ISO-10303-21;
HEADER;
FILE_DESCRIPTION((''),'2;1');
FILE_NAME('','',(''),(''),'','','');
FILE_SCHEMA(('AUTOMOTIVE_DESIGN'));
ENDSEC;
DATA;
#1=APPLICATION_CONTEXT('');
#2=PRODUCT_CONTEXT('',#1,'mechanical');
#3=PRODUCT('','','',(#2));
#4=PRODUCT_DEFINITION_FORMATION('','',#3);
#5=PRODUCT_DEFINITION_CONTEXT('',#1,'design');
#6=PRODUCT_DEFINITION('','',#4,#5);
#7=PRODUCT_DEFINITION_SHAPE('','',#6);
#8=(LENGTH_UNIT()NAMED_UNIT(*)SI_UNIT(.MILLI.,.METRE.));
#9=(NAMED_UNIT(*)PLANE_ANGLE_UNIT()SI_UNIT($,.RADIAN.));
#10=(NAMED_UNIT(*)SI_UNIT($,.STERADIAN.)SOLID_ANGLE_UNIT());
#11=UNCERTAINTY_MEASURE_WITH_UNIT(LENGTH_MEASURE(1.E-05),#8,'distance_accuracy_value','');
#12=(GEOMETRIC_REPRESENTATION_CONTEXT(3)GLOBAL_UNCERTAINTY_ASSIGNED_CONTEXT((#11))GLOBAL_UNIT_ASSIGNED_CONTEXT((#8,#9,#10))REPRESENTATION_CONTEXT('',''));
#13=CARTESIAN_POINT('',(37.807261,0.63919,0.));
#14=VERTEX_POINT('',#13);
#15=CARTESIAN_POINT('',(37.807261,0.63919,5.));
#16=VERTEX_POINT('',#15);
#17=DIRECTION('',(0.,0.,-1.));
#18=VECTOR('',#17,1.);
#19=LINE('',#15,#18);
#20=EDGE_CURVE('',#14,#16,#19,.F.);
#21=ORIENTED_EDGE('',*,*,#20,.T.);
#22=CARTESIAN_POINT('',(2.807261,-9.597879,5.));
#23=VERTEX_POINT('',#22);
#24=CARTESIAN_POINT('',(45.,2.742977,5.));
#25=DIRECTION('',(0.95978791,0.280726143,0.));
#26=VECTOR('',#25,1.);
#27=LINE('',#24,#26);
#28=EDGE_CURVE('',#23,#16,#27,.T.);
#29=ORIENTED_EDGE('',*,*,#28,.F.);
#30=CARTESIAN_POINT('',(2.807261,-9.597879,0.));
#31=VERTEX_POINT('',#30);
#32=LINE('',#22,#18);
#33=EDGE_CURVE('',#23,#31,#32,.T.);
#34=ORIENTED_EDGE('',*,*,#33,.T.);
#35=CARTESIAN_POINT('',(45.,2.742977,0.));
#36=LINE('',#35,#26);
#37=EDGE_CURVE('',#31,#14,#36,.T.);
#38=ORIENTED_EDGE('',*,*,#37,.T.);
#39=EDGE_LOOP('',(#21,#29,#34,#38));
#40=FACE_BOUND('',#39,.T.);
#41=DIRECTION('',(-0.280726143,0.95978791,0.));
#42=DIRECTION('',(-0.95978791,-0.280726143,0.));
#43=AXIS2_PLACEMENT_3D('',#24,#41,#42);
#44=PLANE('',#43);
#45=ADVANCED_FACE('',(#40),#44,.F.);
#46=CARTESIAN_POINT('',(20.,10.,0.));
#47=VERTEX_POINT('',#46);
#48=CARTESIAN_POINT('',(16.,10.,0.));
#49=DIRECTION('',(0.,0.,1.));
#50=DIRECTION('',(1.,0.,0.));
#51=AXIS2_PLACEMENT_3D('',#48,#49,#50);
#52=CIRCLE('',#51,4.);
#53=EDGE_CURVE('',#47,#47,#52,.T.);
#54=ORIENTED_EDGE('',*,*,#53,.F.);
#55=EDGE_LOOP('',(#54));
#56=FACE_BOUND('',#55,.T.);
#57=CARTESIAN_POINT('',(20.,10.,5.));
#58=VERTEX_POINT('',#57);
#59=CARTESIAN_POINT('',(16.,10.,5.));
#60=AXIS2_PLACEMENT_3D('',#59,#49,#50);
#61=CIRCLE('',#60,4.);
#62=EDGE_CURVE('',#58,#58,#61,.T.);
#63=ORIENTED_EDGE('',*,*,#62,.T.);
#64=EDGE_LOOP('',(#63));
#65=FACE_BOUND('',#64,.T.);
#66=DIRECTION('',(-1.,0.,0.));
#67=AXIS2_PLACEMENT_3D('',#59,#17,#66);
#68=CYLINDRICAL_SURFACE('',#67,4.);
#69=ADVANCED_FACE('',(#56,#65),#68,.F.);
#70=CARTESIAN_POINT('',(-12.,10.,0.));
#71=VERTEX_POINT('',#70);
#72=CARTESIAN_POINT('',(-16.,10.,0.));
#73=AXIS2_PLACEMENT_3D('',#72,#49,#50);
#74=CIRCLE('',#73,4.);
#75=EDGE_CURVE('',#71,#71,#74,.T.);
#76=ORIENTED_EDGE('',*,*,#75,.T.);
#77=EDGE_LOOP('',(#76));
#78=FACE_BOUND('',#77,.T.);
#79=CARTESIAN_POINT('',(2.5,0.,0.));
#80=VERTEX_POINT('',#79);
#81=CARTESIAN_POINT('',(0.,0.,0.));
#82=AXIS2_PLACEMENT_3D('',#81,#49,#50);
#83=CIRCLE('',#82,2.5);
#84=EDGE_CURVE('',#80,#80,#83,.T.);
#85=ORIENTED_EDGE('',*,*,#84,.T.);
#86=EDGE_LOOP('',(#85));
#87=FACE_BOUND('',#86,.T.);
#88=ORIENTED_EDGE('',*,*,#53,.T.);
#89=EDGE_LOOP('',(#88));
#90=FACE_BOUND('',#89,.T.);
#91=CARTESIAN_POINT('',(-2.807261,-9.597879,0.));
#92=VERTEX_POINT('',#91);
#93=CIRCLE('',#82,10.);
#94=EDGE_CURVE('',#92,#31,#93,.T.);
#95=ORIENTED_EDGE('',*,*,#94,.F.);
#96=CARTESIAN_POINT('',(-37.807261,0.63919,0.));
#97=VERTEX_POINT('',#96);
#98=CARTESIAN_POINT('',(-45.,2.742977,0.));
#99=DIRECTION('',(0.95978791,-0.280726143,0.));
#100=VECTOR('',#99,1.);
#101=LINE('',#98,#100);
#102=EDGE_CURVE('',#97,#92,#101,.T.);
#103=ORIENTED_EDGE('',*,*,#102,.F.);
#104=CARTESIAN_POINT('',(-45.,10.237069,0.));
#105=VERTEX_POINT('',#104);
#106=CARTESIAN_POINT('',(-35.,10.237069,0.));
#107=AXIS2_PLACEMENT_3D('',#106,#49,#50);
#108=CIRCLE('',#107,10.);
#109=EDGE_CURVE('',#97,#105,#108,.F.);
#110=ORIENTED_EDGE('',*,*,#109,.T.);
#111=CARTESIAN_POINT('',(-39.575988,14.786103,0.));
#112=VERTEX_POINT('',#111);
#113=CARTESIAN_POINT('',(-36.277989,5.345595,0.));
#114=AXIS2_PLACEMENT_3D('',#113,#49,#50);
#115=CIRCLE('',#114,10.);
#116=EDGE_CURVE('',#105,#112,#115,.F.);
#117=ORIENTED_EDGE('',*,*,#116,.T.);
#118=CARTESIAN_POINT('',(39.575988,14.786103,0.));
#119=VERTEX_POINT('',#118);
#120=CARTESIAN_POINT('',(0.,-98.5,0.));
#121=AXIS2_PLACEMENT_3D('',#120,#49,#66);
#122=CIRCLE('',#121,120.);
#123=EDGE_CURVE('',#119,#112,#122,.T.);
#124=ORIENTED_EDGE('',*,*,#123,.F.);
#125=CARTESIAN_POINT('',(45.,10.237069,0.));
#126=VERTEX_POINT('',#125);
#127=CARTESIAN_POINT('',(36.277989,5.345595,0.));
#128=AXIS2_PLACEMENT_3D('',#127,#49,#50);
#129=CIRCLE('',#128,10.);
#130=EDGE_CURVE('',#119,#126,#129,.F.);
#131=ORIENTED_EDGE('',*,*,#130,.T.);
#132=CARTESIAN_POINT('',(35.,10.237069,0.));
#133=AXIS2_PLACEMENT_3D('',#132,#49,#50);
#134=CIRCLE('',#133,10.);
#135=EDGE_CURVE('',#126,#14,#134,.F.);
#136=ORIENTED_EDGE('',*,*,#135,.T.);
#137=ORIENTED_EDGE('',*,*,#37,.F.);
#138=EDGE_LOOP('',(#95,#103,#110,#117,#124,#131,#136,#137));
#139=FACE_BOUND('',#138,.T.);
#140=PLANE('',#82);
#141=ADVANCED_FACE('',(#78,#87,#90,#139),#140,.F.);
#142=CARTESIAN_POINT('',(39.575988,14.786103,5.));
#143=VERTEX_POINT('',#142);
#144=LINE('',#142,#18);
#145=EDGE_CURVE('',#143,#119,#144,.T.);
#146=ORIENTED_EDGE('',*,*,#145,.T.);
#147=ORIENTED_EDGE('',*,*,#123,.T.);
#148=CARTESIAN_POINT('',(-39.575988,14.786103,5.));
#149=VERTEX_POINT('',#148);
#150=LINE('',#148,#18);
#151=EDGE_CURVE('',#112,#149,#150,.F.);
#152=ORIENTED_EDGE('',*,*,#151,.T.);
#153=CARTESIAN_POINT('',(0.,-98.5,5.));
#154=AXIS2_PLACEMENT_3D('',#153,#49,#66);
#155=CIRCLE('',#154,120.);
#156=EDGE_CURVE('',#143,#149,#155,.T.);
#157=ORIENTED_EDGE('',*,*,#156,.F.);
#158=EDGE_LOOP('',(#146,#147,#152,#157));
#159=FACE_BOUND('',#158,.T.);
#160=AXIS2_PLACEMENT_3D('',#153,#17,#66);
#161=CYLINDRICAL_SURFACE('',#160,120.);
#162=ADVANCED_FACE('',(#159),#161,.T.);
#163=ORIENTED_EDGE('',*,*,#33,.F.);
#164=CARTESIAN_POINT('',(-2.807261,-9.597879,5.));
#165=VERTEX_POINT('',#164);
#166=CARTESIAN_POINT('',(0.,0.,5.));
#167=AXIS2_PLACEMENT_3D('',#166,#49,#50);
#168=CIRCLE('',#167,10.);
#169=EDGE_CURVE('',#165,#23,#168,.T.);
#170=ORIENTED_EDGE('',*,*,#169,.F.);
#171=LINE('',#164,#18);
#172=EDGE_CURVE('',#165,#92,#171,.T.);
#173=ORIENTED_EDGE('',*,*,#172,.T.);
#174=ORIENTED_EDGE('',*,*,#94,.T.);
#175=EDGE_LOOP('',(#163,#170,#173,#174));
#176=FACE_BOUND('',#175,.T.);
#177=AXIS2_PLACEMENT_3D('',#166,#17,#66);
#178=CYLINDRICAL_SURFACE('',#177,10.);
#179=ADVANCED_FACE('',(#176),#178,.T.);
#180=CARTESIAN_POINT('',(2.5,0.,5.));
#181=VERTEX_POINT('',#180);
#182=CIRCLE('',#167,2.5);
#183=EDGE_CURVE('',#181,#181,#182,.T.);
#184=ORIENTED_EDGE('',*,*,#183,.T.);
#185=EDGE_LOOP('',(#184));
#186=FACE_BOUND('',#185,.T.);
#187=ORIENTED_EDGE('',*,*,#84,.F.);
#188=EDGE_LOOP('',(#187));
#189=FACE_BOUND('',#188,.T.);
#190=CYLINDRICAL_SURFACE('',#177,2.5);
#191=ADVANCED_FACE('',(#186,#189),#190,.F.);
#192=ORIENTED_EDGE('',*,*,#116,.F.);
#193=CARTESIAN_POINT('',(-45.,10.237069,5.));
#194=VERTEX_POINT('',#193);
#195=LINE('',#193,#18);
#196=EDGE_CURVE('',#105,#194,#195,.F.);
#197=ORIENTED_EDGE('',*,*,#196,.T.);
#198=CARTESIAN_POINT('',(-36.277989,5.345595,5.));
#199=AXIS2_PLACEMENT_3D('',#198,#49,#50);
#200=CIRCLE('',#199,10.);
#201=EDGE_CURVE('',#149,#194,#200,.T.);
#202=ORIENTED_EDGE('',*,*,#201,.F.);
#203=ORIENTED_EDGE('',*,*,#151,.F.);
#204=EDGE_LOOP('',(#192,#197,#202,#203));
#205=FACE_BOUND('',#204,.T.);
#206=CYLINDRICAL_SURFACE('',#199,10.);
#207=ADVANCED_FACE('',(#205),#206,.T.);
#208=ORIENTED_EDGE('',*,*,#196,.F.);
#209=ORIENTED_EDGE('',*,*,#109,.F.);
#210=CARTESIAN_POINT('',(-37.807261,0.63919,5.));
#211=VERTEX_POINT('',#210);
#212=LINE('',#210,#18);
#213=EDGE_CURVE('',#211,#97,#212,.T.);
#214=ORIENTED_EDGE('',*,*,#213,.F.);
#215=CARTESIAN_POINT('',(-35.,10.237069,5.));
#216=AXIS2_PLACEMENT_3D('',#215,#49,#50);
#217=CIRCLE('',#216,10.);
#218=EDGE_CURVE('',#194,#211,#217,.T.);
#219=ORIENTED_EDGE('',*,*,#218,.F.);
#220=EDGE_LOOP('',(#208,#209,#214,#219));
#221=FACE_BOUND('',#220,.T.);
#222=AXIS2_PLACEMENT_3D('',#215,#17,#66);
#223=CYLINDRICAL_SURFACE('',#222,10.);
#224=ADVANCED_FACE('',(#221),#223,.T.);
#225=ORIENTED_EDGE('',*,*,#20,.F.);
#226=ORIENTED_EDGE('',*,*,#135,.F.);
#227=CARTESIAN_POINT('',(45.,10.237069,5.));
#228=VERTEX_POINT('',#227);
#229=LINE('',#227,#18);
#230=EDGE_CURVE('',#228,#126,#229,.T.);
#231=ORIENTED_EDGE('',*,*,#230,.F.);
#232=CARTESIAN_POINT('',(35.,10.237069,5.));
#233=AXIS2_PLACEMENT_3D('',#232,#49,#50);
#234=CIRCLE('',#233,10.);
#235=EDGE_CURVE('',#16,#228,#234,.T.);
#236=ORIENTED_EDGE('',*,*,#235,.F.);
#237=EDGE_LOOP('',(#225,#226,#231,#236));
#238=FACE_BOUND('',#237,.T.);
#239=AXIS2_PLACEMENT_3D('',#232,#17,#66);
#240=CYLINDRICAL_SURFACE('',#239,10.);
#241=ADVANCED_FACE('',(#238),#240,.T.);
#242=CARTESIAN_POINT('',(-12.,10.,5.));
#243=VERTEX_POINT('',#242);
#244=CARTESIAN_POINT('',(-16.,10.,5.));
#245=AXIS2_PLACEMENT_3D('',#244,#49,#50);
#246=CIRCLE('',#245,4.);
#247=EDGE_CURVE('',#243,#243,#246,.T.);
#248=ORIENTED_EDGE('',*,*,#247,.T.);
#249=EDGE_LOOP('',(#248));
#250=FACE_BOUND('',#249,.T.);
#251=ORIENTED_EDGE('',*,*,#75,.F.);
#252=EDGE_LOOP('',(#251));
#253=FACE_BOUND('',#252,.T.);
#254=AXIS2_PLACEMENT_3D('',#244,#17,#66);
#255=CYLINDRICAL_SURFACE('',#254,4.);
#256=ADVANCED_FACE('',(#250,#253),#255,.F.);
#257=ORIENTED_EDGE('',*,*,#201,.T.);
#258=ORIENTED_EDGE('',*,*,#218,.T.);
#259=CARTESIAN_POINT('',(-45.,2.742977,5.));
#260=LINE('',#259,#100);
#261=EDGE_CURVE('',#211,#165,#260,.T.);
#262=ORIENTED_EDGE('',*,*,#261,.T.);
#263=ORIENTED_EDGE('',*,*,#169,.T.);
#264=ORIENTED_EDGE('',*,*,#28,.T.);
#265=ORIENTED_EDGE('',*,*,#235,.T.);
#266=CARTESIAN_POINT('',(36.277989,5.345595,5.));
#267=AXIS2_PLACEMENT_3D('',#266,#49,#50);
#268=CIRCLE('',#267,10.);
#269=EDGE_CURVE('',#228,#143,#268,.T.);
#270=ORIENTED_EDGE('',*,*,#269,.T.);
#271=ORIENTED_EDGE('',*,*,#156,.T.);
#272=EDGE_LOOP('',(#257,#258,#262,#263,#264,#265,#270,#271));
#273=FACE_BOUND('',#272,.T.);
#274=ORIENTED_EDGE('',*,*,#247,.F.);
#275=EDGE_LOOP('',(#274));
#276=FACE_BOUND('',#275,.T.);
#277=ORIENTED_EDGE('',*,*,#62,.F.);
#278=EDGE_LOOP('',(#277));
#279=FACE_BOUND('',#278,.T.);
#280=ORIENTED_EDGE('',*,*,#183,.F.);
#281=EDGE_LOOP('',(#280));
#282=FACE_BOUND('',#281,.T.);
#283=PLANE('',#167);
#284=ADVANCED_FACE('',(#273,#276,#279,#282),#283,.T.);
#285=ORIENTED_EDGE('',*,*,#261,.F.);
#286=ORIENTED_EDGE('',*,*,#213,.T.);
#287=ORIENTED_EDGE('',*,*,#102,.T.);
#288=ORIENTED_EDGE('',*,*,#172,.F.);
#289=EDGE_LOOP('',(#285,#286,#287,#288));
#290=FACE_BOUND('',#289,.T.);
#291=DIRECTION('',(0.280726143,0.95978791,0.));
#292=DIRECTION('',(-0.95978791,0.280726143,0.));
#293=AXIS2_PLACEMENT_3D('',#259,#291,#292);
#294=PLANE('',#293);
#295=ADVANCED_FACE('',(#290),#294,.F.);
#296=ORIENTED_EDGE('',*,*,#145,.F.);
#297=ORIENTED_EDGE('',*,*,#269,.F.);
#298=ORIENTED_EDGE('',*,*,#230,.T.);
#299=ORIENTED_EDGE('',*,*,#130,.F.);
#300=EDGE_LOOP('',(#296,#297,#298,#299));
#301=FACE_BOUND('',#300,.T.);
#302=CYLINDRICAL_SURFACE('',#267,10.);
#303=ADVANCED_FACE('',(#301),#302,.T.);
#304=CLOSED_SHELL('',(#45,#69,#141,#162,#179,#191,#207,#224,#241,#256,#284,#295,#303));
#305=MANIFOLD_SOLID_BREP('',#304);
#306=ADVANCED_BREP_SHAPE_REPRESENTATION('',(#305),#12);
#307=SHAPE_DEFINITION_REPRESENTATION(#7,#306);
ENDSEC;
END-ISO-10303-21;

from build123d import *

# Parameters (mm, degrees)
SKETCH1_R           = 2.5
SKETCH1_R_2         = 4
BOSS_EXTRUDE1_DEPTH = 5
FILLET1_R           = 10
FILLET2_R           = 10


with BuildPart() as part:
    # Sketch1 → Boss-Extrude1 (new body)
    with BuildSketch(Plane.XY):
        with BuildLine():
            Line((45, 12.742977306), (45, 2.742977306))
            Line((45, 2.742977306), (2.807261435, -9.597879101))
            ThreePointArc((2.807261435, -9.597879101), (0, -10), (-2.807261435, -9.597879101))
            Line((-2.807261435, -9.597879101), (-45, 2.742977306))
            Line((-45, 2.742977306), (-45, 12.742977306))
            ThreePointArc((-45, 12.742977306), (0, 21.5), (45, 12.742977306))
        make_face()
        Circle(SKETCH1_R, mode=Mode.SUBTRACT)
        with Locations((16, 10)):
            Circle(SKETCH1_R_2, mode=Mode.SUBTRACT)
        with Locations((-16, 10)):
            Circle(SKETCH1_R_2, mode=Mode.SUBTRACT)
    extrude(amount=BOSS_EXTRUDE1_DEPTH)

    # Fillet1
    fillet1_edges = [part.edges().sort_by_distance(p)[0] for p in [
        (-45, 2.742977306, 2.5),
        (45, 2.742977306, 2.5),
    ]]
    fillet(fillet1_edges, radius=FILLET1_R)

    # Fillet2
    # the kernel refuses this fillet: 10 mm, written as the material it takes off along each edge
    with BuildSketch(Plane(origin=(45, 12.742977306, -14.490141462), x_dir=(0, -1, 0), z_dir=(0, 0, 1))) as fillet2_piece_1:
        with BuildLine():
            CenterArc((7.397382661, -8.722011181), FILLET2_R, 119.284560105, 41.458809305)
            Line((-2.043125943, -5.424012197), (-2.231936115, -5.358052218))
            ThreePointArc((-2.231936115, -5.358052218), (-1.241477696, -2.629168254), (-0.185404962, 0.075))
            Line((-0.185404962, 0.075), (0, 0.2))
            ThreePointArc((0, 0.2), (1.252954174, 0.2), (2.408078861, 0.174440224))
            Line((2.408078861, 0.174440224), (2.505908347, 0))
        make_face()
    extrude(amount=33.980282925, mode=Mode.SUBTRACT)
    with BuildSketch(Plane(origin=(-45, 12.742977306, -14.490141462), x_dir=(0.9358107737298137, 0.3525027599483545, 0), z_dir=(0, 0, 1))) as fillet2_piece_2:
        with BuildLine():
            CenterArc((5.554554227, -9.997083405), FILLET2_R, 88.616158877, 41.458809305)
            Line((-0.883339609, -2.34505603), (-1.012097485, -2.192015482))
            ThreePointArc((-1.012097485, -2.192015482), (-0.628831959, -1.102027463), (-0.187162155, 0.070500552))
            Line((-0.187162155, 0.070500552), (-0.004830047, 0.199941668))
            ThreePointArc((-0.004830047, 0.199941668), (2.898028292, 0.234999137), (5.800886632, 0.199941668))
            Line((5.800886632, 0.199941668), (5.796056585, 0))
        make_face()
    extrude(amount=33.980282925, mode=Mode.SUBTRACT)


solid = part.part
